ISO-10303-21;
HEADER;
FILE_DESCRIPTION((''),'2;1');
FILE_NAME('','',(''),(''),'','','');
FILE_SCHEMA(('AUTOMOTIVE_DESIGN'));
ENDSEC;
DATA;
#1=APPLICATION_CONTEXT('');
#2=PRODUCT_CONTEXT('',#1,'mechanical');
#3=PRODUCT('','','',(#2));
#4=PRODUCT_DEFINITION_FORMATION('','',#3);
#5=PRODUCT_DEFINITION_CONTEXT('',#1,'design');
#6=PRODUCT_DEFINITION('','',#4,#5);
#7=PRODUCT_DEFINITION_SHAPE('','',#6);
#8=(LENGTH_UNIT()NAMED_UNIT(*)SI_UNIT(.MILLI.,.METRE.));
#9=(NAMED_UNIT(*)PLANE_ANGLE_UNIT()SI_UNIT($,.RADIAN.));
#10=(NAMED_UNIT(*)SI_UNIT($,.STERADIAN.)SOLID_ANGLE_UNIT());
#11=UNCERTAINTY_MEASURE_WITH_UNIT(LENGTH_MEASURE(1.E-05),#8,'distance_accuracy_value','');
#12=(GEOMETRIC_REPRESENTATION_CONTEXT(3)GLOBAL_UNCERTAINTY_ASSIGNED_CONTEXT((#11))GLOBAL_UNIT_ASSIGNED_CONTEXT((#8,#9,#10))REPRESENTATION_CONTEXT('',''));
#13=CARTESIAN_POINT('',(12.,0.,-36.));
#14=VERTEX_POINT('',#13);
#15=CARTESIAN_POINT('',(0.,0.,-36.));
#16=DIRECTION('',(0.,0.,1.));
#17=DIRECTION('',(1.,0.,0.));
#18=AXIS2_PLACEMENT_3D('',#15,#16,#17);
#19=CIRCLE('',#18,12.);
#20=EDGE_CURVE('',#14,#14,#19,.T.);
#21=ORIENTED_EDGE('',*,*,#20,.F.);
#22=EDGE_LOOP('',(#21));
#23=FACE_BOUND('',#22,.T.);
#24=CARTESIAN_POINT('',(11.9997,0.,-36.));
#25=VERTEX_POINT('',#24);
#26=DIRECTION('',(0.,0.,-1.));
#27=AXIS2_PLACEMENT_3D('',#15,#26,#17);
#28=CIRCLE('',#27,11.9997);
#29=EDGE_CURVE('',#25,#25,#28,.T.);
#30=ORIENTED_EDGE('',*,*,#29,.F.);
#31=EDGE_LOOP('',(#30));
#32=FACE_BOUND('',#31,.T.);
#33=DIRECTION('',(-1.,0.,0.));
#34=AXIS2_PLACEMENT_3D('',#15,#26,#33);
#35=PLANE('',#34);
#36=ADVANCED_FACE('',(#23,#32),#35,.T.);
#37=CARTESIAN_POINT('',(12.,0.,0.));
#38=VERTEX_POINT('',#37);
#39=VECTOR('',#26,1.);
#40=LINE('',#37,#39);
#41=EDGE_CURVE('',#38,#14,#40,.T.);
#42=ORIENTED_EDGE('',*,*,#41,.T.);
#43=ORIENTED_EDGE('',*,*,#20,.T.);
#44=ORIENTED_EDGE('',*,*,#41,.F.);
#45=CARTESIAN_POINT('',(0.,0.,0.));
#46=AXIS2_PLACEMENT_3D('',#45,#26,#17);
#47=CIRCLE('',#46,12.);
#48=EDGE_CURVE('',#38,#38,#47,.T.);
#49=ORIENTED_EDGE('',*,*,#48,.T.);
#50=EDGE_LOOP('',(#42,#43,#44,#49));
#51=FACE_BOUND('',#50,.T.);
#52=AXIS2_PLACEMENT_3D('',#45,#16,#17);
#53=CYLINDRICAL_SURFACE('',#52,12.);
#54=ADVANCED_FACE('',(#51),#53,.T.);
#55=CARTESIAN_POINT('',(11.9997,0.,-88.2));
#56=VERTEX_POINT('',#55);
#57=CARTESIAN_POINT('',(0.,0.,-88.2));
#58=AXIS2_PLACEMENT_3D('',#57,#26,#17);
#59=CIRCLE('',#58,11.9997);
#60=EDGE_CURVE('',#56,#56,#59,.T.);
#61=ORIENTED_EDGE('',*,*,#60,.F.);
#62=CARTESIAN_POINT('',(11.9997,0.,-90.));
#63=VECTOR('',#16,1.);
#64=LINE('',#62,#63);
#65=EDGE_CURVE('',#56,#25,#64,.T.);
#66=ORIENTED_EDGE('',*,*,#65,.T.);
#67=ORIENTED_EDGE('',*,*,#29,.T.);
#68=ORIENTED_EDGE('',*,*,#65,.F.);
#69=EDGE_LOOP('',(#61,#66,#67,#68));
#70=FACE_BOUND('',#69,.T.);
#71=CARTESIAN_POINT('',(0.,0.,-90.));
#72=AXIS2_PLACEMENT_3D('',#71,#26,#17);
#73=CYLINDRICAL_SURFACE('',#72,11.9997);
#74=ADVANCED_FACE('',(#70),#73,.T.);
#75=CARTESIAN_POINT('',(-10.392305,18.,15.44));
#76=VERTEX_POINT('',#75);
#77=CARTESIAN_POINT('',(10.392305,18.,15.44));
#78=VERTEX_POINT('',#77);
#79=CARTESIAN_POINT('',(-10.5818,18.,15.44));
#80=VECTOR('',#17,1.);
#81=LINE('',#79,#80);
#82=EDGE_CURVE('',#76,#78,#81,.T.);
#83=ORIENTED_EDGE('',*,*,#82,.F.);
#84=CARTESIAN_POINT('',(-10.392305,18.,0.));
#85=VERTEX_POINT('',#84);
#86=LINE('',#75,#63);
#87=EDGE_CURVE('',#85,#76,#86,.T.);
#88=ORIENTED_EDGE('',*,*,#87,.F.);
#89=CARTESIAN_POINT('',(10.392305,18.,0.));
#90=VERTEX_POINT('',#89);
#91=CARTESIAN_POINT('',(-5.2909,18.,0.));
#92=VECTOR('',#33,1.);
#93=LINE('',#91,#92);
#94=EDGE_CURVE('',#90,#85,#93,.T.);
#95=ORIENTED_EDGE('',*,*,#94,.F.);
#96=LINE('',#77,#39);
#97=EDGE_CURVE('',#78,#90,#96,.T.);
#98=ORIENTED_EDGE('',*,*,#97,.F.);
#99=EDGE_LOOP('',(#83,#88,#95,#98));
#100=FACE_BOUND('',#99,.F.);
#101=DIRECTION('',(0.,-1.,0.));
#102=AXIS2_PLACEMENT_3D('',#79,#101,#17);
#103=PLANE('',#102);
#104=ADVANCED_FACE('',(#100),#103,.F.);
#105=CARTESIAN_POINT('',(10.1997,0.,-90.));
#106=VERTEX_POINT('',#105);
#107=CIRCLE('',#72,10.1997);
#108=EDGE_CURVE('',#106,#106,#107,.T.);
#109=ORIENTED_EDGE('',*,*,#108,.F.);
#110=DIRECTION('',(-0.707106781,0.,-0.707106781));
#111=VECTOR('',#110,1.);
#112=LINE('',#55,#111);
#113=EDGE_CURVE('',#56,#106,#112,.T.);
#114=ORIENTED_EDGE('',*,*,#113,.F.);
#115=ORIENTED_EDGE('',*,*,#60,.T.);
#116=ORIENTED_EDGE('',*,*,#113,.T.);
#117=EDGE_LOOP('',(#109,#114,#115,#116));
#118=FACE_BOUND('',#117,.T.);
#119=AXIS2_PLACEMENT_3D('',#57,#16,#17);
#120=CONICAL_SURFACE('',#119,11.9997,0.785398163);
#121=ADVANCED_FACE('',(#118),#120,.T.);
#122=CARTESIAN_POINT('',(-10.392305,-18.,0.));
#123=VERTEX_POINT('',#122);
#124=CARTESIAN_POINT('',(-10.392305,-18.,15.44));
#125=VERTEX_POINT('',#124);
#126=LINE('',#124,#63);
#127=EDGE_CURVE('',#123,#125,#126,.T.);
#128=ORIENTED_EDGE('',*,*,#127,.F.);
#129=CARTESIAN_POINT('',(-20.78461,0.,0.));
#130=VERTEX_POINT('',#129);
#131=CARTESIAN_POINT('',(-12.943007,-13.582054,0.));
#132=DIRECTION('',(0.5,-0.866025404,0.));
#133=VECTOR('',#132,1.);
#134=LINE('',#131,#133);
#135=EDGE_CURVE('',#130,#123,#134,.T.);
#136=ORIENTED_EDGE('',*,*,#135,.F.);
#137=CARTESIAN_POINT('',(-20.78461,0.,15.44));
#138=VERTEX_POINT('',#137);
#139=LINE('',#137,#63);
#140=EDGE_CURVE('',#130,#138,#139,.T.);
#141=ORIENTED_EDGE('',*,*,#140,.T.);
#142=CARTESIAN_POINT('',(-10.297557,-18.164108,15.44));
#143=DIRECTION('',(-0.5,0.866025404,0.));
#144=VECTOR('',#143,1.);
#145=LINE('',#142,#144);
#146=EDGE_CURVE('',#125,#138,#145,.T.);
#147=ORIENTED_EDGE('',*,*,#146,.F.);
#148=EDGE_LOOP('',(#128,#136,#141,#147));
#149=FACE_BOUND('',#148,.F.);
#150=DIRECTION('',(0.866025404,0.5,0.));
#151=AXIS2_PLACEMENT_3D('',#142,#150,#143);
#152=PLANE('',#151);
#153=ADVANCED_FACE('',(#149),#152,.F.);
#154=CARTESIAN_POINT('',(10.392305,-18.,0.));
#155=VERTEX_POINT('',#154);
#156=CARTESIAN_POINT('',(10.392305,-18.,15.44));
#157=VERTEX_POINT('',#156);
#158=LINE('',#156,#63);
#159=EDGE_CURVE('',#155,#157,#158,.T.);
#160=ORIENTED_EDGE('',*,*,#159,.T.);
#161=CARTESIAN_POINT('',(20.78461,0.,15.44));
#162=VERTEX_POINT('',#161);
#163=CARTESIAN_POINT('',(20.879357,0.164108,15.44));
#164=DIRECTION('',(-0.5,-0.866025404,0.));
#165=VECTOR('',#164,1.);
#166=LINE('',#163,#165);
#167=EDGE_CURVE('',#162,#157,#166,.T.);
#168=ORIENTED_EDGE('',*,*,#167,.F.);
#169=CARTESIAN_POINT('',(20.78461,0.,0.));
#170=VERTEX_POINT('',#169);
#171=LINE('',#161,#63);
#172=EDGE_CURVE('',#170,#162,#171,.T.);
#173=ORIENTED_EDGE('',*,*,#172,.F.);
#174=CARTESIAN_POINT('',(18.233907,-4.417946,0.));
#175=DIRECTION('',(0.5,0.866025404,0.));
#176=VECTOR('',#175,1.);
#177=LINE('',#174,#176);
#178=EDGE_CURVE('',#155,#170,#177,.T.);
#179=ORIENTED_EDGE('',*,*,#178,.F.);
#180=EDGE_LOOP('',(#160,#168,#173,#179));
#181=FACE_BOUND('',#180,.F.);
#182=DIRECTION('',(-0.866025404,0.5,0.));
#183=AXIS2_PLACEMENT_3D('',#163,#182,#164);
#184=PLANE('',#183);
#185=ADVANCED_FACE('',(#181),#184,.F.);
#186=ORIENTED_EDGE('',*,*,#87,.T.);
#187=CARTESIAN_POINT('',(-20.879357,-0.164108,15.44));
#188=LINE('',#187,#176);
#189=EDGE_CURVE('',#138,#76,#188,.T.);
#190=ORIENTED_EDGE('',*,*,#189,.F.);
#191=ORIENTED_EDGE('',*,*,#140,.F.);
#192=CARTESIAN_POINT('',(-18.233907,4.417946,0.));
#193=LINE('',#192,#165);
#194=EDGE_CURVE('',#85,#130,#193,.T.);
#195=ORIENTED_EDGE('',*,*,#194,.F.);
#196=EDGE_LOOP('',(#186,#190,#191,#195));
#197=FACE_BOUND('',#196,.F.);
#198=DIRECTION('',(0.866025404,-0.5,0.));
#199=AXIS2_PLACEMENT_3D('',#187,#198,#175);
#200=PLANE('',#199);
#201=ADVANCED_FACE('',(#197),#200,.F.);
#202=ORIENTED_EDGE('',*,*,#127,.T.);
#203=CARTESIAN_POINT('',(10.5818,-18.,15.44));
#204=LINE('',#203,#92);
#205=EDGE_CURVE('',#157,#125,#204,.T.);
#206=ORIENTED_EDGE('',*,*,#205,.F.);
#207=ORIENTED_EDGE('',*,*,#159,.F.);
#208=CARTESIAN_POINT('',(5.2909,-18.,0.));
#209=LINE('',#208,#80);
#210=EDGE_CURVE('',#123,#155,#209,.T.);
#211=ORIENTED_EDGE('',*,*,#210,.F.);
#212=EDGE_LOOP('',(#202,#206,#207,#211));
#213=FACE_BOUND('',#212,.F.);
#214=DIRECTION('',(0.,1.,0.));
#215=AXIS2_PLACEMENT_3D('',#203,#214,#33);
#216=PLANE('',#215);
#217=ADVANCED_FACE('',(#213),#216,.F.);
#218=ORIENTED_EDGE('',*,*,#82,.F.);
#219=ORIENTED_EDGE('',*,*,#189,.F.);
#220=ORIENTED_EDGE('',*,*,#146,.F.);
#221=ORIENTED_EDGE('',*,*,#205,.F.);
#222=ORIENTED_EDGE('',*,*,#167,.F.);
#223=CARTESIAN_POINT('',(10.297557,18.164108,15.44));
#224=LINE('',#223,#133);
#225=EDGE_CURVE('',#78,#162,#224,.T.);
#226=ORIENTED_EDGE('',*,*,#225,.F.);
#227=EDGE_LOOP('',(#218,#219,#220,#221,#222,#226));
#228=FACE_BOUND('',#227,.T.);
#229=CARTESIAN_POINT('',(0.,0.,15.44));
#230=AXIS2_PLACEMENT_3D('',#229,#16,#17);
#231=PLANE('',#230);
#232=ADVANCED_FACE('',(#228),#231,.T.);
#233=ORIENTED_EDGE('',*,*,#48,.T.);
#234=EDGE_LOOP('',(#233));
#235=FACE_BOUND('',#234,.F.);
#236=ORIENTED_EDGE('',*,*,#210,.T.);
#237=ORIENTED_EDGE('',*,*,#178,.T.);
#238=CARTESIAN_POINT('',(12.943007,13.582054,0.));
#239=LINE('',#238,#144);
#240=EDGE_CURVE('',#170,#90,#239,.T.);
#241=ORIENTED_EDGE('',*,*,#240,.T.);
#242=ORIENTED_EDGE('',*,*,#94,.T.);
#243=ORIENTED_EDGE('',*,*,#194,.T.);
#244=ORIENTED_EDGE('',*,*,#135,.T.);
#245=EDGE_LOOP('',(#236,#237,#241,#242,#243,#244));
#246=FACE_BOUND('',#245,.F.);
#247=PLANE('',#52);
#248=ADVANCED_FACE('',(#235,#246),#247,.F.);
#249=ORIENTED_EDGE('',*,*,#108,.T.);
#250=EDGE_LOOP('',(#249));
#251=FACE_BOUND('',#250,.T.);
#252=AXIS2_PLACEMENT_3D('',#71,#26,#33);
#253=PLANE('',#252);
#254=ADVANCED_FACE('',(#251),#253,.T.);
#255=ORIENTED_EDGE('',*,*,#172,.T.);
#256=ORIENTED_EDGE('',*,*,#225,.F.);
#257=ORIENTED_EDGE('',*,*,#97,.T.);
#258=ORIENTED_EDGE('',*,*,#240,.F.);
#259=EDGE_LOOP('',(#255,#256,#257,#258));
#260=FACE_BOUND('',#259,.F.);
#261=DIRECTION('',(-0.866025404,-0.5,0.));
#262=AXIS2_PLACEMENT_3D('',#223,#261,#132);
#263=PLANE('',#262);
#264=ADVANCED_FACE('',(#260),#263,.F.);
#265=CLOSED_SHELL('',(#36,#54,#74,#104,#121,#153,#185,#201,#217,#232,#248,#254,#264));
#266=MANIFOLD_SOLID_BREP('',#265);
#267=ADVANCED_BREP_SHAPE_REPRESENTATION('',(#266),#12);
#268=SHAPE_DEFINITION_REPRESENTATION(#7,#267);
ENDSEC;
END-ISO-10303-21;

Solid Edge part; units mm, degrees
sketch "Sketch1" plane through (0, 0, 0) normal (0, 0, 1) x (1, 0, 0)
  circle A0 centre (0, 0) radius 20.88
  dimension "D1" = 41.76
extrude "Protrusion1" add sketch "Sketch1" along normal blind 15.44
sketch "Sketch2" plane through (0, 0, 0) normal (0, 0, -1) x (1, 0, 0)
  circle A0 centre (0, 0) radius 12
extrude "Protrusion2" add sketch "Sketch2" along normal blind 90
sketch "Sketch3" plane through (0, 0, -90) normal (0, 0, -1) x (1, 0, 0)
  circle A0 centre (0, 0) radius 11.9997
extrude "Cutout1" cut sketch "Sketch3" against normal blind 54 flip side to cut
chamfer "Chamfer_1" distance 1.8 angle 45 1 edges at (-11.9997, 0, -90)
sketch "Sketch4" plane through (0, 0, 15.44) normal (0, 0, 1) x (1, 0, 0)
  line L0 (-10.5818, 18) -> (10.5818, 18)
  dimension "D1" = 36
extrude "Cutout2" cut sketch "Sketch4" against normal up to next material side at (0, 18.05, 15.44)
pattern_circular "Pattern1" count 6 over 360 about axis through (0, 0, 15.44) along (0, 0, 1) of "Cutout2"
properties part number "300519"
